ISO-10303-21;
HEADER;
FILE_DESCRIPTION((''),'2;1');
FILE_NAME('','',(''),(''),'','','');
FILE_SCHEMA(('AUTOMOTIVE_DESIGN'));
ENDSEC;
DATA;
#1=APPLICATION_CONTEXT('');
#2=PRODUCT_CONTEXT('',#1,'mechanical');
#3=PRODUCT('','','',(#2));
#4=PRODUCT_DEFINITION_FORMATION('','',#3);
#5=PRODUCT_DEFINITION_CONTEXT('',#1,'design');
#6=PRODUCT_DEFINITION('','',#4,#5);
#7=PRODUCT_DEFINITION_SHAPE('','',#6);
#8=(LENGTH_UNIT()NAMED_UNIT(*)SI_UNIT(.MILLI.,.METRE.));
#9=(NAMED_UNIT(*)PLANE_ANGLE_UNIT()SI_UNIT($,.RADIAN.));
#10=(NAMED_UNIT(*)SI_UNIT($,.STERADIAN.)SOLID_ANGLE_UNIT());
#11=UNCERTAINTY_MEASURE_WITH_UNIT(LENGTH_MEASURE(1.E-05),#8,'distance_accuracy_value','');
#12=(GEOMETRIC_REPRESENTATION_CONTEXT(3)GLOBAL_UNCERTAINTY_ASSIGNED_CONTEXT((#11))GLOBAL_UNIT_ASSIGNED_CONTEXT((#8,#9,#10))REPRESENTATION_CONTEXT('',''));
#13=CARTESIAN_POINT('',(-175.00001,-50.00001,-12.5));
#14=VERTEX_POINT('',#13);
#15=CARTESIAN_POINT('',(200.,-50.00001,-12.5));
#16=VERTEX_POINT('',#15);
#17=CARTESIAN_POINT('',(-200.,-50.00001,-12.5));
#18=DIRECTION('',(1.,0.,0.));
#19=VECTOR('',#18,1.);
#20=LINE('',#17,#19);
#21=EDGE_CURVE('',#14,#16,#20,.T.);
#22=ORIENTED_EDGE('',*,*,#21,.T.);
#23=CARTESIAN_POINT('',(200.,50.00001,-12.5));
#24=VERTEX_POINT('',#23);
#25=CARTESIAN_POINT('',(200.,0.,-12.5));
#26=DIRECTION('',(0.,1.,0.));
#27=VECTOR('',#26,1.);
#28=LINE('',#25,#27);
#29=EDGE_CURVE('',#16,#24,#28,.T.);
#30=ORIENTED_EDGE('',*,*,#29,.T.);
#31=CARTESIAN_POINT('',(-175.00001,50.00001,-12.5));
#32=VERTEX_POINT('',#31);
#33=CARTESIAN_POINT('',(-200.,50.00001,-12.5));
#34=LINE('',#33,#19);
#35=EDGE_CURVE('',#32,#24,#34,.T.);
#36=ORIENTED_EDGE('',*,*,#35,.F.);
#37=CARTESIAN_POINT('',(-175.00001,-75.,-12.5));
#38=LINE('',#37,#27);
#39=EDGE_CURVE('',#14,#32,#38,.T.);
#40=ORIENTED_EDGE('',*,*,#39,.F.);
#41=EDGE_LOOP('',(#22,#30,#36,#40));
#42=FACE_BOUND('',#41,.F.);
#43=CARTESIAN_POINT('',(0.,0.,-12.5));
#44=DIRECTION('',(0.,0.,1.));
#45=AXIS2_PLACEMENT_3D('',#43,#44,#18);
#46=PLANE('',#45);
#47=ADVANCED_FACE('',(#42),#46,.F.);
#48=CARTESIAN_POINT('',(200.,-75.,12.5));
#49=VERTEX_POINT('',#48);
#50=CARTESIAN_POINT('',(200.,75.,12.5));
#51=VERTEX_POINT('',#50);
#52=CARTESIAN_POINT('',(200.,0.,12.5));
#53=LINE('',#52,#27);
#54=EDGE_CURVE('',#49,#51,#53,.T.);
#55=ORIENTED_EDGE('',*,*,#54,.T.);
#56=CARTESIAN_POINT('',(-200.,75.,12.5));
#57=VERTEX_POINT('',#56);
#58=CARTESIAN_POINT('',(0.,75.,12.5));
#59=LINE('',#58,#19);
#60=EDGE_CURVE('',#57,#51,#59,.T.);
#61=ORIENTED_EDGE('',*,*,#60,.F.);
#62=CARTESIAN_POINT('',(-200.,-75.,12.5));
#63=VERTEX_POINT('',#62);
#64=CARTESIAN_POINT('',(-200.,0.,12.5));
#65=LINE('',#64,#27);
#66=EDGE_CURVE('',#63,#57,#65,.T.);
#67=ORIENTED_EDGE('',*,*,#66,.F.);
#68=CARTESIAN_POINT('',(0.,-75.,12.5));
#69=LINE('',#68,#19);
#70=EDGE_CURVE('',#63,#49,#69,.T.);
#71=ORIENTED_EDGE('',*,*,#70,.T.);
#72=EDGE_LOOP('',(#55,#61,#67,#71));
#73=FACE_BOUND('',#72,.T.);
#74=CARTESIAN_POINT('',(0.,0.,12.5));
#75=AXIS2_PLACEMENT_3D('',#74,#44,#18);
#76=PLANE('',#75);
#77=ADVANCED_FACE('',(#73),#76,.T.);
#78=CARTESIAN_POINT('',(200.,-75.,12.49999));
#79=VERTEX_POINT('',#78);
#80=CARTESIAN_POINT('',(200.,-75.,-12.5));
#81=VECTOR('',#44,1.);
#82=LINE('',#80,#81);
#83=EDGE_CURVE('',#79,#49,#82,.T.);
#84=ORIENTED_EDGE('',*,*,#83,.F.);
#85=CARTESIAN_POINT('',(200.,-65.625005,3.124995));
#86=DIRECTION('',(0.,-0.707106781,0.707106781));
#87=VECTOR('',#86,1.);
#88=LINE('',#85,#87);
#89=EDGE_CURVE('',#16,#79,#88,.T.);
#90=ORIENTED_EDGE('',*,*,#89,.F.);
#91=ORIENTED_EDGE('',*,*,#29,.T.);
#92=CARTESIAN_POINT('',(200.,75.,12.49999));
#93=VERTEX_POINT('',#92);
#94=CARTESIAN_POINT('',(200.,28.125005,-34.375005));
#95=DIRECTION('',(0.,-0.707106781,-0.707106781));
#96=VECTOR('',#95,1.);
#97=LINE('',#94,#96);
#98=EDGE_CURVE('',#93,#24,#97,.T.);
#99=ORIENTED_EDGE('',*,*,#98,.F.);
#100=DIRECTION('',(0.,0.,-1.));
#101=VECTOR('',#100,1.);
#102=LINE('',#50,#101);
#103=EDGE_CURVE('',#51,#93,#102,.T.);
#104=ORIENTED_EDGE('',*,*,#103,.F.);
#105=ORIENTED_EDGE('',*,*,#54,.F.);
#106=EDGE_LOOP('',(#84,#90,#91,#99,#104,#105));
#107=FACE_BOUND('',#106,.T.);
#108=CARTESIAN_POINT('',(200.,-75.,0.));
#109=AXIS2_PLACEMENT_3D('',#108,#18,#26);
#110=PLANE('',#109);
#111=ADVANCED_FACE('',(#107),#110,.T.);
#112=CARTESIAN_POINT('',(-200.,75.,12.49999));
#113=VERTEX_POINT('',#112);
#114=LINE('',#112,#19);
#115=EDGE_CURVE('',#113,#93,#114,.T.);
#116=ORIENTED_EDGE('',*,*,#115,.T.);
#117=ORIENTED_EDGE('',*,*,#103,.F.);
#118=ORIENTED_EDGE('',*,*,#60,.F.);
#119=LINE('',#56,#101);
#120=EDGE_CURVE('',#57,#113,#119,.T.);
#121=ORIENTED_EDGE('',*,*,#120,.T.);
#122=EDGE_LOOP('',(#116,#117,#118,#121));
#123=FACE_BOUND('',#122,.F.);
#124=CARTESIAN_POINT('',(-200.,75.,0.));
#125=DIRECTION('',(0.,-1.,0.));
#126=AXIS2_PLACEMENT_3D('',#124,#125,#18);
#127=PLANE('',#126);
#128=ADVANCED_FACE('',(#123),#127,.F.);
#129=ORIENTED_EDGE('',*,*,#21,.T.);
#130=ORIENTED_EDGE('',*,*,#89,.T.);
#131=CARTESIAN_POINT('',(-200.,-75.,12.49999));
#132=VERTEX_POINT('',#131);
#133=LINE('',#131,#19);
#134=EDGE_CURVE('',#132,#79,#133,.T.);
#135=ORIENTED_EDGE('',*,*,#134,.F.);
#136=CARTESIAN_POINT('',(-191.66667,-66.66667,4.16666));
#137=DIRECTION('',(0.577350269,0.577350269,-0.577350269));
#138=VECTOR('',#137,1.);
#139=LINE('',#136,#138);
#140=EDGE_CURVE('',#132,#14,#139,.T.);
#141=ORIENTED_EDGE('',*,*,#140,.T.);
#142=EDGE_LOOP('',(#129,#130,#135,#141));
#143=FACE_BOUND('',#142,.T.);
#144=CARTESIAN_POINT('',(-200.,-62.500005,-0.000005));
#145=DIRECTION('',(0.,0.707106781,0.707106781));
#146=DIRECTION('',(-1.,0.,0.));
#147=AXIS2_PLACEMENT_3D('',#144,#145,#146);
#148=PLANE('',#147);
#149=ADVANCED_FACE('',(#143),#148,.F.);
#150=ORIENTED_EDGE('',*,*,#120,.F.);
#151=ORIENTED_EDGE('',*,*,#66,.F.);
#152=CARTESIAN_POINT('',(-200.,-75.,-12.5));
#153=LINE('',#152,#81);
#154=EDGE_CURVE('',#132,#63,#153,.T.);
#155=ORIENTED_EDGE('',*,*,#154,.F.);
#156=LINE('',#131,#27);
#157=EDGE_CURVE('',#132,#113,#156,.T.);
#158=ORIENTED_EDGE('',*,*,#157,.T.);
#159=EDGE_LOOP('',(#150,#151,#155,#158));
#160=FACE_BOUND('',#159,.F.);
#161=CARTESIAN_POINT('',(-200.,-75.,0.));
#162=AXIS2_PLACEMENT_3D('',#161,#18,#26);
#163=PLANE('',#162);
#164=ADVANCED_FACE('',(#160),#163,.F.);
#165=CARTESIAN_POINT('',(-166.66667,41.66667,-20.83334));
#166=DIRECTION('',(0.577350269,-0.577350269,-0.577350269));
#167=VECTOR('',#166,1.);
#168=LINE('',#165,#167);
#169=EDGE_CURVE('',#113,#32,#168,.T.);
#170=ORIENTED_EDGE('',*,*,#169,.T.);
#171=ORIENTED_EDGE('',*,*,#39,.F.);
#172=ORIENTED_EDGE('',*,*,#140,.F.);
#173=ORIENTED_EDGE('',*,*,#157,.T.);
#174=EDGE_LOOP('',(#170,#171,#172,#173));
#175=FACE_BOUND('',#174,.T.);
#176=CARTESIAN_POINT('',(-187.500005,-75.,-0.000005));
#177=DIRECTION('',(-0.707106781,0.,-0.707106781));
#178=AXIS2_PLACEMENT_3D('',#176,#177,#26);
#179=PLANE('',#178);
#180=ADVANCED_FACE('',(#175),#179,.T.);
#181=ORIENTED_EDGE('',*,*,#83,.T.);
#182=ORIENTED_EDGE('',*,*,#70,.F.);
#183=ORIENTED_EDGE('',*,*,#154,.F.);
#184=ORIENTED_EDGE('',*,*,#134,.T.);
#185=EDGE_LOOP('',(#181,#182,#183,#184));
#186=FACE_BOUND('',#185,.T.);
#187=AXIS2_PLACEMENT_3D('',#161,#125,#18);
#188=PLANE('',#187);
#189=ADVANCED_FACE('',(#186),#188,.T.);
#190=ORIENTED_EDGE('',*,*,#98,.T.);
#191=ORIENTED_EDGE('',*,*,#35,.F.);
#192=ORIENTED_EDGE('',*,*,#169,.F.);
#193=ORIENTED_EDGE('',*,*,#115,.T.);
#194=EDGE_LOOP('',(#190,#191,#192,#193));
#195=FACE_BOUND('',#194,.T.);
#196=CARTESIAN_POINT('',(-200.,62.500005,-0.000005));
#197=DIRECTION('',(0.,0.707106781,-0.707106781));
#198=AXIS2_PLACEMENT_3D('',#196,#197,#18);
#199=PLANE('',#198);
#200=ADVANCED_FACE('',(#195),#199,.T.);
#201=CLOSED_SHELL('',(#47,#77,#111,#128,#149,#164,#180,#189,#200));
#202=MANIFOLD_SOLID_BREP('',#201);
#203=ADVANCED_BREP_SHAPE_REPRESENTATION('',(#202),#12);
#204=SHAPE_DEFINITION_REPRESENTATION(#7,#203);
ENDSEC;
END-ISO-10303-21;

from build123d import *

# Parameters (mm, degrees)
F0_W     = 400
F0_H     = 150
F1_DEPTH = 12.5
F2_SIZE  = 24.99999


# Not quite as in the source:
# - a fillet or chamfer is up to 0.001 mm smaller than in the source, because OpenCascade refuses the exact size


with BuildPart() as f1:
    # F0 (on Top) → F1 (new body, symmetric)
    with BuildSketch(Plane.XY):
        Rectangle(F0_W, F0_H)
    extrude(amount=F1_DEPTH, both=True)

    # F2 (size 25 in the source; OpenCascade refuses exactly that, so slightly less here)
    f2_edges = [f1.edges().sort_by_distance(p)[0] for p in [
        (0, 75, -12.5),
        (-200, 0, -12.5),
        (0, -75, -12.5),
    ]]
    chamfer(f2_edges, length=F2_SIZE)


solid = f1.part
